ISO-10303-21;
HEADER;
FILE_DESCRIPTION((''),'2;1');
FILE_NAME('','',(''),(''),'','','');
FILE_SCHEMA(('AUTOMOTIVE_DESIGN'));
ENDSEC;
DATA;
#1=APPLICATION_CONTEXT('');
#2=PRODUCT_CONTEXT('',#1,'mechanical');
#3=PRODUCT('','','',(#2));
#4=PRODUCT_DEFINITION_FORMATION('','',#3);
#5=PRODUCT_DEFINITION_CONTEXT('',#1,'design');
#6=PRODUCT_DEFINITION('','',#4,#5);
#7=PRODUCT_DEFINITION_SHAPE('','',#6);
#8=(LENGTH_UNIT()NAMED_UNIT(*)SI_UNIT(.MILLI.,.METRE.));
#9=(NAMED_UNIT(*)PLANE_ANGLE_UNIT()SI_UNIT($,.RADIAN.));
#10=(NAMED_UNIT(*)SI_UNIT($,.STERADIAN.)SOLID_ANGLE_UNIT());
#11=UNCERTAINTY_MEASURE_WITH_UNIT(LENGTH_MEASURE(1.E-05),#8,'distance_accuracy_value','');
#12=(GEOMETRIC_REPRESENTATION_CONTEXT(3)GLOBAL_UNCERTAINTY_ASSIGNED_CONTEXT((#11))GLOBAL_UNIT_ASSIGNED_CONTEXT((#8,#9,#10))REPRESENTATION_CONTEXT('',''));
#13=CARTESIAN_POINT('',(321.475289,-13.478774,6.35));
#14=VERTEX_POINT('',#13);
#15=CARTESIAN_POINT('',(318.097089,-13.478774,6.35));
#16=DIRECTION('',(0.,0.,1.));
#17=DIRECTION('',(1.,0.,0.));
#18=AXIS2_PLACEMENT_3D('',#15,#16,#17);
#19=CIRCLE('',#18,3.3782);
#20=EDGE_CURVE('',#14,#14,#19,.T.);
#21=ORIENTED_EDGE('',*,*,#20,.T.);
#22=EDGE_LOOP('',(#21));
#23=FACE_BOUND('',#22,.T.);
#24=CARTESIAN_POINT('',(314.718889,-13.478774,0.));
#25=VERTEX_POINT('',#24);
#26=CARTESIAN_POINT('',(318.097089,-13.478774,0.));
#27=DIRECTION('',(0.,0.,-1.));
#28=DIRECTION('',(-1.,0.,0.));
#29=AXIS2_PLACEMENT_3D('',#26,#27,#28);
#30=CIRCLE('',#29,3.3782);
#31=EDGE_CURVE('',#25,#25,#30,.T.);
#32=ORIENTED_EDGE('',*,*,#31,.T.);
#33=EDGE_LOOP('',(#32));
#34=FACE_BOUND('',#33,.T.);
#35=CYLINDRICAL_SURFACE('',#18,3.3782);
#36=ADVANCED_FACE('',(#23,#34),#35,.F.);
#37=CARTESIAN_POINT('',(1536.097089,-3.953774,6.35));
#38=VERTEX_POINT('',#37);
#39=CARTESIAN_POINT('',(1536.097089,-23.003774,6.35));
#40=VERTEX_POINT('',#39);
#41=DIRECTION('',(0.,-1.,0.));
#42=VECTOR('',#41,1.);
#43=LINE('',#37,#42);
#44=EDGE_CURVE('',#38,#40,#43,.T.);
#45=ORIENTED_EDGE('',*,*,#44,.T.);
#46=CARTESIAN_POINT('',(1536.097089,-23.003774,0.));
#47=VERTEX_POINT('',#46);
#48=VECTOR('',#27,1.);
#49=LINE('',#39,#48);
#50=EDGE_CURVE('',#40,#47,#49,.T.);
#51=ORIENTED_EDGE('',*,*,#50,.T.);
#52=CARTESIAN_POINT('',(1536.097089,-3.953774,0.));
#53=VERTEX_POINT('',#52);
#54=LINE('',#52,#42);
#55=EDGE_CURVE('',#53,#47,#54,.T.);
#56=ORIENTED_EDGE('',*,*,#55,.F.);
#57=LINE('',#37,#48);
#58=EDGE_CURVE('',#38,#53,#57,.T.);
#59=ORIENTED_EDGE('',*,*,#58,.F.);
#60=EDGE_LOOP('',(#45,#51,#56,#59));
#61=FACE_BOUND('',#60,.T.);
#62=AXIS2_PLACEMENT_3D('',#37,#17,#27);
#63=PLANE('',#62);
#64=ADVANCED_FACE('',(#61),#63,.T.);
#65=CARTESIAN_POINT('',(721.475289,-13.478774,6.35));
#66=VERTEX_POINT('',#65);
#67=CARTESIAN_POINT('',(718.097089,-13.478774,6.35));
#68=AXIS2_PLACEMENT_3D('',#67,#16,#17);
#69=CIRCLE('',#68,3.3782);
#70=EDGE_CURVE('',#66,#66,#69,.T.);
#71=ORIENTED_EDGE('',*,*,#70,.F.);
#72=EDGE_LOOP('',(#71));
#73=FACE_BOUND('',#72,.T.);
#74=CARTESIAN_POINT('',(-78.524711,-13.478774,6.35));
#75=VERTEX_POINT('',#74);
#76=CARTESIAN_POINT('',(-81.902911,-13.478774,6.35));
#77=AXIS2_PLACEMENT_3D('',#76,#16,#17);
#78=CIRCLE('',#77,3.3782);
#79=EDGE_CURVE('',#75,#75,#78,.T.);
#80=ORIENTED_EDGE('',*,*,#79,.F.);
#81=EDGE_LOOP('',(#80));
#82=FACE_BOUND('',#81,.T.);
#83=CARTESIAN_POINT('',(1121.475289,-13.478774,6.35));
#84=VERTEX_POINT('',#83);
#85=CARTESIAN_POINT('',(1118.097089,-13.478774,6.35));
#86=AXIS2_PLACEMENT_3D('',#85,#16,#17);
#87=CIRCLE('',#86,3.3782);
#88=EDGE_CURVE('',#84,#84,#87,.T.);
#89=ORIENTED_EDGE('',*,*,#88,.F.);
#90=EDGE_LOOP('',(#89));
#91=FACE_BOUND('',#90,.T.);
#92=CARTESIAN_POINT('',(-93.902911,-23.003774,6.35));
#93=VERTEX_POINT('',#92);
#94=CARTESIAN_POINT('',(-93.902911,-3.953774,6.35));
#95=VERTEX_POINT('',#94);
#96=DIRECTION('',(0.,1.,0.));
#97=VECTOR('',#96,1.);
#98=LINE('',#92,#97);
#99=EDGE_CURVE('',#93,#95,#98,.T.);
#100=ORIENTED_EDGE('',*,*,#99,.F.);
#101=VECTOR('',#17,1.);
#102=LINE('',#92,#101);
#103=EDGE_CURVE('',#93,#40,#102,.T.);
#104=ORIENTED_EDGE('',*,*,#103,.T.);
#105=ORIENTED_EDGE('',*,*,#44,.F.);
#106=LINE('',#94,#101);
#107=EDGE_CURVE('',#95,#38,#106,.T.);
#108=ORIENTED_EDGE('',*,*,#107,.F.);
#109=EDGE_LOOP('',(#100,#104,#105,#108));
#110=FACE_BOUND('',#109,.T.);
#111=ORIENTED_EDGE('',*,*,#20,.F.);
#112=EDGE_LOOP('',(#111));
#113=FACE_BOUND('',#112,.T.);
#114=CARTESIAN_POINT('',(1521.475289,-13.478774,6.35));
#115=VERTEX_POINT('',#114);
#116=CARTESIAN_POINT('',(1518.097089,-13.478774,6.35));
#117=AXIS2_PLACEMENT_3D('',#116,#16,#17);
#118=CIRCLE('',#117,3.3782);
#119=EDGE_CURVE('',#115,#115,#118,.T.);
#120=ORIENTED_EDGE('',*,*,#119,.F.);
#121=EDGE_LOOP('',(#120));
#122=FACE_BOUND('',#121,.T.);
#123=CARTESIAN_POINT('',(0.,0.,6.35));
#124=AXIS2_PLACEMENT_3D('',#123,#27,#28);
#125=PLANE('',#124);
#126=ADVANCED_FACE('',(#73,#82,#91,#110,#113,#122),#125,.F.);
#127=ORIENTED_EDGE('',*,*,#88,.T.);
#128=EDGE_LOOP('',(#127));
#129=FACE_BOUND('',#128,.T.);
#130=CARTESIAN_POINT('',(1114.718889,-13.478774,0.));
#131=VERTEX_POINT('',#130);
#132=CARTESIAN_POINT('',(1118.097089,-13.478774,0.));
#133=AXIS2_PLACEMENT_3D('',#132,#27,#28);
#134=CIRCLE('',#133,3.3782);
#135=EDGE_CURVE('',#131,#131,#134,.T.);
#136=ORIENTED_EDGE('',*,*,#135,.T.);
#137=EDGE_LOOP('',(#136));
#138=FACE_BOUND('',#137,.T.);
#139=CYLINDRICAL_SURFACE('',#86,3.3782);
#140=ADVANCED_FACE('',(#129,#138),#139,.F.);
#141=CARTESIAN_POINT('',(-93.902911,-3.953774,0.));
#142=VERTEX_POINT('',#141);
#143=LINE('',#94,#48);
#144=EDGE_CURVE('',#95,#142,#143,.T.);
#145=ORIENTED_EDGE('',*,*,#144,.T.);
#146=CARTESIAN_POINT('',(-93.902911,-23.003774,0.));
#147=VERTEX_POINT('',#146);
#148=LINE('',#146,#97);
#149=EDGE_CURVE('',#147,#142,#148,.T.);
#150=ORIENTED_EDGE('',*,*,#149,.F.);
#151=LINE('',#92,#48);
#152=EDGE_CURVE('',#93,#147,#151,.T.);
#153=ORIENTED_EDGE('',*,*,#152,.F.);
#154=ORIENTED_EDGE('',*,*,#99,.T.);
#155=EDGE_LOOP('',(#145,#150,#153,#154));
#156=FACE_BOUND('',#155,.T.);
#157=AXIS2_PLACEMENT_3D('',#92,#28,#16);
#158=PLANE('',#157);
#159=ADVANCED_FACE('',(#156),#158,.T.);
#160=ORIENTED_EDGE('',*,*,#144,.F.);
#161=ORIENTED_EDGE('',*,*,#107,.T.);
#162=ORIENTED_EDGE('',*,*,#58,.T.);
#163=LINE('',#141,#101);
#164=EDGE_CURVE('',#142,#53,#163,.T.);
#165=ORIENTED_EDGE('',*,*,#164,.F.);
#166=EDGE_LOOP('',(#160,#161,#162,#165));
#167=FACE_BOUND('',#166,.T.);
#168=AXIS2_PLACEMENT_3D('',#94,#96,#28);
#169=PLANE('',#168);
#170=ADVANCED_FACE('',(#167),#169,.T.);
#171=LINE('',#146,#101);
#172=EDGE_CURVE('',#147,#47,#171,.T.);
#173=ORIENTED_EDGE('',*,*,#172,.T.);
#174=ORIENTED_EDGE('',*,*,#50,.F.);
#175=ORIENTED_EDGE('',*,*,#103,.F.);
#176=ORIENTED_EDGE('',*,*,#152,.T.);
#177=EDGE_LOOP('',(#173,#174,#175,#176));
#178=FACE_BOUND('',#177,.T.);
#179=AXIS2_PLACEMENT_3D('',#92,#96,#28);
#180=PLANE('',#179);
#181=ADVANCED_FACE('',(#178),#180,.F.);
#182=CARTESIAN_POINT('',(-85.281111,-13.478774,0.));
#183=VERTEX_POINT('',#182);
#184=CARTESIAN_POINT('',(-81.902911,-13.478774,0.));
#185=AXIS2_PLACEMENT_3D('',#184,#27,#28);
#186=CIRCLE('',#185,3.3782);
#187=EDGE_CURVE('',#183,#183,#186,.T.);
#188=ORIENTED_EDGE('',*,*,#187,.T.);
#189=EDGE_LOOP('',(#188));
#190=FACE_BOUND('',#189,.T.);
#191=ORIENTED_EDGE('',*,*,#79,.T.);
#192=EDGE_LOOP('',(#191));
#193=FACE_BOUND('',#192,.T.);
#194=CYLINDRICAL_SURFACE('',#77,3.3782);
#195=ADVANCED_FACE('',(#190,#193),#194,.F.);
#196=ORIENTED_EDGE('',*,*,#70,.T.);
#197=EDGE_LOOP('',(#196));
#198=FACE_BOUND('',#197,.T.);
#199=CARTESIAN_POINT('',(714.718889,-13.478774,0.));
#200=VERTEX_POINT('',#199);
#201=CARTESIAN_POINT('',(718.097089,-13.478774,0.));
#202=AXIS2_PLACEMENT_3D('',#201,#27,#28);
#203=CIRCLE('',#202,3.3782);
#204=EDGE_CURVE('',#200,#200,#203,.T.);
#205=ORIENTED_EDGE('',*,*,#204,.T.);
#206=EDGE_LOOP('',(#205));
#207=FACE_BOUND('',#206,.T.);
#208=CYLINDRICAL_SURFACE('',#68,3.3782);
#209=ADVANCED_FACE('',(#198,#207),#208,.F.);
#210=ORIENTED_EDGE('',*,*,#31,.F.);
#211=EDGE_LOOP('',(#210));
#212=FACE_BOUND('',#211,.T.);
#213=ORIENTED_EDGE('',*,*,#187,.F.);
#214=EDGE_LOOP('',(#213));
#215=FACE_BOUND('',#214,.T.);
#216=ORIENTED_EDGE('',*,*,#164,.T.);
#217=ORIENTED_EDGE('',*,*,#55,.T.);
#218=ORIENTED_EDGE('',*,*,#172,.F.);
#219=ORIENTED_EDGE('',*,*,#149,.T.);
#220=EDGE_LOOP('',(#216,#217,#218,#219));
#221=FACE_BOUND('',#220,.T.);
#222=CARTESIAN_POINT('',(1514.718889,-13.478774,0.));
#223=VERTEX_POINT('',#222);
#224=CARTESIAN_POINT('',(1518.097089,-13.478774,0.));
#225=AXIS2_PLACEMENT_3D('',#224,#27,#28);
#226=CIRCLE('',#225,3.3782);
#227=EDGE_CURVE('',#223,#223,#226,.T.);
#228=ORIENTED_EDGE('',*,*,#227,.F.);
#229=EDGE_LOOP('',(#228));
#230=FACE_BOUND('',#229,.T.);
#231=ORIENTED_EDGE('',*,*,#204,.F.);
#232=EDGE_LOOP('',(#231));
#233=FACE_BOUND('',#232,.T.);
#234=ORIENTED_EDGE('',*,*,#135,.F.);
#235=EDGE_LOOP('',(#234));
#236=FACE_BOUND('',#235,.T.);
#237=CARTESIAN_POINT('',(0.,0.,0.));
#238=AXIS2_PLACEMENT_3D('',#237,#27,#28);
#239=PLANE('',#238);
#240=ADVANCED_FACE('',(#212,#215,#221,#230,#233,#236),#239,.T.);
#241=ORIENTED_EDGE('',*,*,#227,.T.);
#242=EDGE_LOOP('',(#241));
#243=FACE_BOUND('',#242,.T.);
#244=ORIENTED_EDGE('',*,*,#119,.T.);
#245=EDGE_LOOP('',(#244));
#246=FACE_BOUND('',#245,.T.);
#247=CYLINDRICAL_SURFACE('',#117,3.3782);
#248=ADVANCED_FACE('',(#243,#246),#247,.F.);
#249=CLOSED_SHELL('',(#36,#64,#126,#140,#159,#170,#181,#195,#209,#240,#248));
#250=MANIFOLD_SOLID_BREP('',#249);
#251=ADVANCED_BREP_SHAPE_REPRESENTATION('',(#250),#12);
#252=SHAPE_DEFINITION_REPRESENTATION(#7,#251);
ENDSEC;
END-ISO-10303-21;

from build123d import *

# Parameters (mm, degrees)
CROQUIS1_W                    = 1630
CROQUIS1_H                    = 19.05
BRIDA_BASE1_DEPTH             = 6.35
TALADRO_DE_MARGEN_PARA_1_41_D = 6.7564


# Sheet-metal steps are written as plain solids
with BuildPart() as part:
    # Croquis1 → Brida base1 (new body)
    with BuildSketch(Plane.XY):
        with Locations((721.097089126, -13.478773585)):
            Rectangle(CROQUIS1_W, CROQUIS1_H)
    extrude(amount=BRIDA_BASE1_DEPTH)

    # Taladro de margen para 1/41 (through all)
    with Locations(Plane.XY.offset(6.35)):
        with Locations((-81.902910874, -13.478773585), (318.097089126, -13.478773585), (718.097089126, -13.478773585), (1118.097089126, -13.478773585), (1518.097089126, -13.478773585)):
            Hole(TALADRO_DE_MARGEN_PARA_1_41_D / 2)


solid = part.part
